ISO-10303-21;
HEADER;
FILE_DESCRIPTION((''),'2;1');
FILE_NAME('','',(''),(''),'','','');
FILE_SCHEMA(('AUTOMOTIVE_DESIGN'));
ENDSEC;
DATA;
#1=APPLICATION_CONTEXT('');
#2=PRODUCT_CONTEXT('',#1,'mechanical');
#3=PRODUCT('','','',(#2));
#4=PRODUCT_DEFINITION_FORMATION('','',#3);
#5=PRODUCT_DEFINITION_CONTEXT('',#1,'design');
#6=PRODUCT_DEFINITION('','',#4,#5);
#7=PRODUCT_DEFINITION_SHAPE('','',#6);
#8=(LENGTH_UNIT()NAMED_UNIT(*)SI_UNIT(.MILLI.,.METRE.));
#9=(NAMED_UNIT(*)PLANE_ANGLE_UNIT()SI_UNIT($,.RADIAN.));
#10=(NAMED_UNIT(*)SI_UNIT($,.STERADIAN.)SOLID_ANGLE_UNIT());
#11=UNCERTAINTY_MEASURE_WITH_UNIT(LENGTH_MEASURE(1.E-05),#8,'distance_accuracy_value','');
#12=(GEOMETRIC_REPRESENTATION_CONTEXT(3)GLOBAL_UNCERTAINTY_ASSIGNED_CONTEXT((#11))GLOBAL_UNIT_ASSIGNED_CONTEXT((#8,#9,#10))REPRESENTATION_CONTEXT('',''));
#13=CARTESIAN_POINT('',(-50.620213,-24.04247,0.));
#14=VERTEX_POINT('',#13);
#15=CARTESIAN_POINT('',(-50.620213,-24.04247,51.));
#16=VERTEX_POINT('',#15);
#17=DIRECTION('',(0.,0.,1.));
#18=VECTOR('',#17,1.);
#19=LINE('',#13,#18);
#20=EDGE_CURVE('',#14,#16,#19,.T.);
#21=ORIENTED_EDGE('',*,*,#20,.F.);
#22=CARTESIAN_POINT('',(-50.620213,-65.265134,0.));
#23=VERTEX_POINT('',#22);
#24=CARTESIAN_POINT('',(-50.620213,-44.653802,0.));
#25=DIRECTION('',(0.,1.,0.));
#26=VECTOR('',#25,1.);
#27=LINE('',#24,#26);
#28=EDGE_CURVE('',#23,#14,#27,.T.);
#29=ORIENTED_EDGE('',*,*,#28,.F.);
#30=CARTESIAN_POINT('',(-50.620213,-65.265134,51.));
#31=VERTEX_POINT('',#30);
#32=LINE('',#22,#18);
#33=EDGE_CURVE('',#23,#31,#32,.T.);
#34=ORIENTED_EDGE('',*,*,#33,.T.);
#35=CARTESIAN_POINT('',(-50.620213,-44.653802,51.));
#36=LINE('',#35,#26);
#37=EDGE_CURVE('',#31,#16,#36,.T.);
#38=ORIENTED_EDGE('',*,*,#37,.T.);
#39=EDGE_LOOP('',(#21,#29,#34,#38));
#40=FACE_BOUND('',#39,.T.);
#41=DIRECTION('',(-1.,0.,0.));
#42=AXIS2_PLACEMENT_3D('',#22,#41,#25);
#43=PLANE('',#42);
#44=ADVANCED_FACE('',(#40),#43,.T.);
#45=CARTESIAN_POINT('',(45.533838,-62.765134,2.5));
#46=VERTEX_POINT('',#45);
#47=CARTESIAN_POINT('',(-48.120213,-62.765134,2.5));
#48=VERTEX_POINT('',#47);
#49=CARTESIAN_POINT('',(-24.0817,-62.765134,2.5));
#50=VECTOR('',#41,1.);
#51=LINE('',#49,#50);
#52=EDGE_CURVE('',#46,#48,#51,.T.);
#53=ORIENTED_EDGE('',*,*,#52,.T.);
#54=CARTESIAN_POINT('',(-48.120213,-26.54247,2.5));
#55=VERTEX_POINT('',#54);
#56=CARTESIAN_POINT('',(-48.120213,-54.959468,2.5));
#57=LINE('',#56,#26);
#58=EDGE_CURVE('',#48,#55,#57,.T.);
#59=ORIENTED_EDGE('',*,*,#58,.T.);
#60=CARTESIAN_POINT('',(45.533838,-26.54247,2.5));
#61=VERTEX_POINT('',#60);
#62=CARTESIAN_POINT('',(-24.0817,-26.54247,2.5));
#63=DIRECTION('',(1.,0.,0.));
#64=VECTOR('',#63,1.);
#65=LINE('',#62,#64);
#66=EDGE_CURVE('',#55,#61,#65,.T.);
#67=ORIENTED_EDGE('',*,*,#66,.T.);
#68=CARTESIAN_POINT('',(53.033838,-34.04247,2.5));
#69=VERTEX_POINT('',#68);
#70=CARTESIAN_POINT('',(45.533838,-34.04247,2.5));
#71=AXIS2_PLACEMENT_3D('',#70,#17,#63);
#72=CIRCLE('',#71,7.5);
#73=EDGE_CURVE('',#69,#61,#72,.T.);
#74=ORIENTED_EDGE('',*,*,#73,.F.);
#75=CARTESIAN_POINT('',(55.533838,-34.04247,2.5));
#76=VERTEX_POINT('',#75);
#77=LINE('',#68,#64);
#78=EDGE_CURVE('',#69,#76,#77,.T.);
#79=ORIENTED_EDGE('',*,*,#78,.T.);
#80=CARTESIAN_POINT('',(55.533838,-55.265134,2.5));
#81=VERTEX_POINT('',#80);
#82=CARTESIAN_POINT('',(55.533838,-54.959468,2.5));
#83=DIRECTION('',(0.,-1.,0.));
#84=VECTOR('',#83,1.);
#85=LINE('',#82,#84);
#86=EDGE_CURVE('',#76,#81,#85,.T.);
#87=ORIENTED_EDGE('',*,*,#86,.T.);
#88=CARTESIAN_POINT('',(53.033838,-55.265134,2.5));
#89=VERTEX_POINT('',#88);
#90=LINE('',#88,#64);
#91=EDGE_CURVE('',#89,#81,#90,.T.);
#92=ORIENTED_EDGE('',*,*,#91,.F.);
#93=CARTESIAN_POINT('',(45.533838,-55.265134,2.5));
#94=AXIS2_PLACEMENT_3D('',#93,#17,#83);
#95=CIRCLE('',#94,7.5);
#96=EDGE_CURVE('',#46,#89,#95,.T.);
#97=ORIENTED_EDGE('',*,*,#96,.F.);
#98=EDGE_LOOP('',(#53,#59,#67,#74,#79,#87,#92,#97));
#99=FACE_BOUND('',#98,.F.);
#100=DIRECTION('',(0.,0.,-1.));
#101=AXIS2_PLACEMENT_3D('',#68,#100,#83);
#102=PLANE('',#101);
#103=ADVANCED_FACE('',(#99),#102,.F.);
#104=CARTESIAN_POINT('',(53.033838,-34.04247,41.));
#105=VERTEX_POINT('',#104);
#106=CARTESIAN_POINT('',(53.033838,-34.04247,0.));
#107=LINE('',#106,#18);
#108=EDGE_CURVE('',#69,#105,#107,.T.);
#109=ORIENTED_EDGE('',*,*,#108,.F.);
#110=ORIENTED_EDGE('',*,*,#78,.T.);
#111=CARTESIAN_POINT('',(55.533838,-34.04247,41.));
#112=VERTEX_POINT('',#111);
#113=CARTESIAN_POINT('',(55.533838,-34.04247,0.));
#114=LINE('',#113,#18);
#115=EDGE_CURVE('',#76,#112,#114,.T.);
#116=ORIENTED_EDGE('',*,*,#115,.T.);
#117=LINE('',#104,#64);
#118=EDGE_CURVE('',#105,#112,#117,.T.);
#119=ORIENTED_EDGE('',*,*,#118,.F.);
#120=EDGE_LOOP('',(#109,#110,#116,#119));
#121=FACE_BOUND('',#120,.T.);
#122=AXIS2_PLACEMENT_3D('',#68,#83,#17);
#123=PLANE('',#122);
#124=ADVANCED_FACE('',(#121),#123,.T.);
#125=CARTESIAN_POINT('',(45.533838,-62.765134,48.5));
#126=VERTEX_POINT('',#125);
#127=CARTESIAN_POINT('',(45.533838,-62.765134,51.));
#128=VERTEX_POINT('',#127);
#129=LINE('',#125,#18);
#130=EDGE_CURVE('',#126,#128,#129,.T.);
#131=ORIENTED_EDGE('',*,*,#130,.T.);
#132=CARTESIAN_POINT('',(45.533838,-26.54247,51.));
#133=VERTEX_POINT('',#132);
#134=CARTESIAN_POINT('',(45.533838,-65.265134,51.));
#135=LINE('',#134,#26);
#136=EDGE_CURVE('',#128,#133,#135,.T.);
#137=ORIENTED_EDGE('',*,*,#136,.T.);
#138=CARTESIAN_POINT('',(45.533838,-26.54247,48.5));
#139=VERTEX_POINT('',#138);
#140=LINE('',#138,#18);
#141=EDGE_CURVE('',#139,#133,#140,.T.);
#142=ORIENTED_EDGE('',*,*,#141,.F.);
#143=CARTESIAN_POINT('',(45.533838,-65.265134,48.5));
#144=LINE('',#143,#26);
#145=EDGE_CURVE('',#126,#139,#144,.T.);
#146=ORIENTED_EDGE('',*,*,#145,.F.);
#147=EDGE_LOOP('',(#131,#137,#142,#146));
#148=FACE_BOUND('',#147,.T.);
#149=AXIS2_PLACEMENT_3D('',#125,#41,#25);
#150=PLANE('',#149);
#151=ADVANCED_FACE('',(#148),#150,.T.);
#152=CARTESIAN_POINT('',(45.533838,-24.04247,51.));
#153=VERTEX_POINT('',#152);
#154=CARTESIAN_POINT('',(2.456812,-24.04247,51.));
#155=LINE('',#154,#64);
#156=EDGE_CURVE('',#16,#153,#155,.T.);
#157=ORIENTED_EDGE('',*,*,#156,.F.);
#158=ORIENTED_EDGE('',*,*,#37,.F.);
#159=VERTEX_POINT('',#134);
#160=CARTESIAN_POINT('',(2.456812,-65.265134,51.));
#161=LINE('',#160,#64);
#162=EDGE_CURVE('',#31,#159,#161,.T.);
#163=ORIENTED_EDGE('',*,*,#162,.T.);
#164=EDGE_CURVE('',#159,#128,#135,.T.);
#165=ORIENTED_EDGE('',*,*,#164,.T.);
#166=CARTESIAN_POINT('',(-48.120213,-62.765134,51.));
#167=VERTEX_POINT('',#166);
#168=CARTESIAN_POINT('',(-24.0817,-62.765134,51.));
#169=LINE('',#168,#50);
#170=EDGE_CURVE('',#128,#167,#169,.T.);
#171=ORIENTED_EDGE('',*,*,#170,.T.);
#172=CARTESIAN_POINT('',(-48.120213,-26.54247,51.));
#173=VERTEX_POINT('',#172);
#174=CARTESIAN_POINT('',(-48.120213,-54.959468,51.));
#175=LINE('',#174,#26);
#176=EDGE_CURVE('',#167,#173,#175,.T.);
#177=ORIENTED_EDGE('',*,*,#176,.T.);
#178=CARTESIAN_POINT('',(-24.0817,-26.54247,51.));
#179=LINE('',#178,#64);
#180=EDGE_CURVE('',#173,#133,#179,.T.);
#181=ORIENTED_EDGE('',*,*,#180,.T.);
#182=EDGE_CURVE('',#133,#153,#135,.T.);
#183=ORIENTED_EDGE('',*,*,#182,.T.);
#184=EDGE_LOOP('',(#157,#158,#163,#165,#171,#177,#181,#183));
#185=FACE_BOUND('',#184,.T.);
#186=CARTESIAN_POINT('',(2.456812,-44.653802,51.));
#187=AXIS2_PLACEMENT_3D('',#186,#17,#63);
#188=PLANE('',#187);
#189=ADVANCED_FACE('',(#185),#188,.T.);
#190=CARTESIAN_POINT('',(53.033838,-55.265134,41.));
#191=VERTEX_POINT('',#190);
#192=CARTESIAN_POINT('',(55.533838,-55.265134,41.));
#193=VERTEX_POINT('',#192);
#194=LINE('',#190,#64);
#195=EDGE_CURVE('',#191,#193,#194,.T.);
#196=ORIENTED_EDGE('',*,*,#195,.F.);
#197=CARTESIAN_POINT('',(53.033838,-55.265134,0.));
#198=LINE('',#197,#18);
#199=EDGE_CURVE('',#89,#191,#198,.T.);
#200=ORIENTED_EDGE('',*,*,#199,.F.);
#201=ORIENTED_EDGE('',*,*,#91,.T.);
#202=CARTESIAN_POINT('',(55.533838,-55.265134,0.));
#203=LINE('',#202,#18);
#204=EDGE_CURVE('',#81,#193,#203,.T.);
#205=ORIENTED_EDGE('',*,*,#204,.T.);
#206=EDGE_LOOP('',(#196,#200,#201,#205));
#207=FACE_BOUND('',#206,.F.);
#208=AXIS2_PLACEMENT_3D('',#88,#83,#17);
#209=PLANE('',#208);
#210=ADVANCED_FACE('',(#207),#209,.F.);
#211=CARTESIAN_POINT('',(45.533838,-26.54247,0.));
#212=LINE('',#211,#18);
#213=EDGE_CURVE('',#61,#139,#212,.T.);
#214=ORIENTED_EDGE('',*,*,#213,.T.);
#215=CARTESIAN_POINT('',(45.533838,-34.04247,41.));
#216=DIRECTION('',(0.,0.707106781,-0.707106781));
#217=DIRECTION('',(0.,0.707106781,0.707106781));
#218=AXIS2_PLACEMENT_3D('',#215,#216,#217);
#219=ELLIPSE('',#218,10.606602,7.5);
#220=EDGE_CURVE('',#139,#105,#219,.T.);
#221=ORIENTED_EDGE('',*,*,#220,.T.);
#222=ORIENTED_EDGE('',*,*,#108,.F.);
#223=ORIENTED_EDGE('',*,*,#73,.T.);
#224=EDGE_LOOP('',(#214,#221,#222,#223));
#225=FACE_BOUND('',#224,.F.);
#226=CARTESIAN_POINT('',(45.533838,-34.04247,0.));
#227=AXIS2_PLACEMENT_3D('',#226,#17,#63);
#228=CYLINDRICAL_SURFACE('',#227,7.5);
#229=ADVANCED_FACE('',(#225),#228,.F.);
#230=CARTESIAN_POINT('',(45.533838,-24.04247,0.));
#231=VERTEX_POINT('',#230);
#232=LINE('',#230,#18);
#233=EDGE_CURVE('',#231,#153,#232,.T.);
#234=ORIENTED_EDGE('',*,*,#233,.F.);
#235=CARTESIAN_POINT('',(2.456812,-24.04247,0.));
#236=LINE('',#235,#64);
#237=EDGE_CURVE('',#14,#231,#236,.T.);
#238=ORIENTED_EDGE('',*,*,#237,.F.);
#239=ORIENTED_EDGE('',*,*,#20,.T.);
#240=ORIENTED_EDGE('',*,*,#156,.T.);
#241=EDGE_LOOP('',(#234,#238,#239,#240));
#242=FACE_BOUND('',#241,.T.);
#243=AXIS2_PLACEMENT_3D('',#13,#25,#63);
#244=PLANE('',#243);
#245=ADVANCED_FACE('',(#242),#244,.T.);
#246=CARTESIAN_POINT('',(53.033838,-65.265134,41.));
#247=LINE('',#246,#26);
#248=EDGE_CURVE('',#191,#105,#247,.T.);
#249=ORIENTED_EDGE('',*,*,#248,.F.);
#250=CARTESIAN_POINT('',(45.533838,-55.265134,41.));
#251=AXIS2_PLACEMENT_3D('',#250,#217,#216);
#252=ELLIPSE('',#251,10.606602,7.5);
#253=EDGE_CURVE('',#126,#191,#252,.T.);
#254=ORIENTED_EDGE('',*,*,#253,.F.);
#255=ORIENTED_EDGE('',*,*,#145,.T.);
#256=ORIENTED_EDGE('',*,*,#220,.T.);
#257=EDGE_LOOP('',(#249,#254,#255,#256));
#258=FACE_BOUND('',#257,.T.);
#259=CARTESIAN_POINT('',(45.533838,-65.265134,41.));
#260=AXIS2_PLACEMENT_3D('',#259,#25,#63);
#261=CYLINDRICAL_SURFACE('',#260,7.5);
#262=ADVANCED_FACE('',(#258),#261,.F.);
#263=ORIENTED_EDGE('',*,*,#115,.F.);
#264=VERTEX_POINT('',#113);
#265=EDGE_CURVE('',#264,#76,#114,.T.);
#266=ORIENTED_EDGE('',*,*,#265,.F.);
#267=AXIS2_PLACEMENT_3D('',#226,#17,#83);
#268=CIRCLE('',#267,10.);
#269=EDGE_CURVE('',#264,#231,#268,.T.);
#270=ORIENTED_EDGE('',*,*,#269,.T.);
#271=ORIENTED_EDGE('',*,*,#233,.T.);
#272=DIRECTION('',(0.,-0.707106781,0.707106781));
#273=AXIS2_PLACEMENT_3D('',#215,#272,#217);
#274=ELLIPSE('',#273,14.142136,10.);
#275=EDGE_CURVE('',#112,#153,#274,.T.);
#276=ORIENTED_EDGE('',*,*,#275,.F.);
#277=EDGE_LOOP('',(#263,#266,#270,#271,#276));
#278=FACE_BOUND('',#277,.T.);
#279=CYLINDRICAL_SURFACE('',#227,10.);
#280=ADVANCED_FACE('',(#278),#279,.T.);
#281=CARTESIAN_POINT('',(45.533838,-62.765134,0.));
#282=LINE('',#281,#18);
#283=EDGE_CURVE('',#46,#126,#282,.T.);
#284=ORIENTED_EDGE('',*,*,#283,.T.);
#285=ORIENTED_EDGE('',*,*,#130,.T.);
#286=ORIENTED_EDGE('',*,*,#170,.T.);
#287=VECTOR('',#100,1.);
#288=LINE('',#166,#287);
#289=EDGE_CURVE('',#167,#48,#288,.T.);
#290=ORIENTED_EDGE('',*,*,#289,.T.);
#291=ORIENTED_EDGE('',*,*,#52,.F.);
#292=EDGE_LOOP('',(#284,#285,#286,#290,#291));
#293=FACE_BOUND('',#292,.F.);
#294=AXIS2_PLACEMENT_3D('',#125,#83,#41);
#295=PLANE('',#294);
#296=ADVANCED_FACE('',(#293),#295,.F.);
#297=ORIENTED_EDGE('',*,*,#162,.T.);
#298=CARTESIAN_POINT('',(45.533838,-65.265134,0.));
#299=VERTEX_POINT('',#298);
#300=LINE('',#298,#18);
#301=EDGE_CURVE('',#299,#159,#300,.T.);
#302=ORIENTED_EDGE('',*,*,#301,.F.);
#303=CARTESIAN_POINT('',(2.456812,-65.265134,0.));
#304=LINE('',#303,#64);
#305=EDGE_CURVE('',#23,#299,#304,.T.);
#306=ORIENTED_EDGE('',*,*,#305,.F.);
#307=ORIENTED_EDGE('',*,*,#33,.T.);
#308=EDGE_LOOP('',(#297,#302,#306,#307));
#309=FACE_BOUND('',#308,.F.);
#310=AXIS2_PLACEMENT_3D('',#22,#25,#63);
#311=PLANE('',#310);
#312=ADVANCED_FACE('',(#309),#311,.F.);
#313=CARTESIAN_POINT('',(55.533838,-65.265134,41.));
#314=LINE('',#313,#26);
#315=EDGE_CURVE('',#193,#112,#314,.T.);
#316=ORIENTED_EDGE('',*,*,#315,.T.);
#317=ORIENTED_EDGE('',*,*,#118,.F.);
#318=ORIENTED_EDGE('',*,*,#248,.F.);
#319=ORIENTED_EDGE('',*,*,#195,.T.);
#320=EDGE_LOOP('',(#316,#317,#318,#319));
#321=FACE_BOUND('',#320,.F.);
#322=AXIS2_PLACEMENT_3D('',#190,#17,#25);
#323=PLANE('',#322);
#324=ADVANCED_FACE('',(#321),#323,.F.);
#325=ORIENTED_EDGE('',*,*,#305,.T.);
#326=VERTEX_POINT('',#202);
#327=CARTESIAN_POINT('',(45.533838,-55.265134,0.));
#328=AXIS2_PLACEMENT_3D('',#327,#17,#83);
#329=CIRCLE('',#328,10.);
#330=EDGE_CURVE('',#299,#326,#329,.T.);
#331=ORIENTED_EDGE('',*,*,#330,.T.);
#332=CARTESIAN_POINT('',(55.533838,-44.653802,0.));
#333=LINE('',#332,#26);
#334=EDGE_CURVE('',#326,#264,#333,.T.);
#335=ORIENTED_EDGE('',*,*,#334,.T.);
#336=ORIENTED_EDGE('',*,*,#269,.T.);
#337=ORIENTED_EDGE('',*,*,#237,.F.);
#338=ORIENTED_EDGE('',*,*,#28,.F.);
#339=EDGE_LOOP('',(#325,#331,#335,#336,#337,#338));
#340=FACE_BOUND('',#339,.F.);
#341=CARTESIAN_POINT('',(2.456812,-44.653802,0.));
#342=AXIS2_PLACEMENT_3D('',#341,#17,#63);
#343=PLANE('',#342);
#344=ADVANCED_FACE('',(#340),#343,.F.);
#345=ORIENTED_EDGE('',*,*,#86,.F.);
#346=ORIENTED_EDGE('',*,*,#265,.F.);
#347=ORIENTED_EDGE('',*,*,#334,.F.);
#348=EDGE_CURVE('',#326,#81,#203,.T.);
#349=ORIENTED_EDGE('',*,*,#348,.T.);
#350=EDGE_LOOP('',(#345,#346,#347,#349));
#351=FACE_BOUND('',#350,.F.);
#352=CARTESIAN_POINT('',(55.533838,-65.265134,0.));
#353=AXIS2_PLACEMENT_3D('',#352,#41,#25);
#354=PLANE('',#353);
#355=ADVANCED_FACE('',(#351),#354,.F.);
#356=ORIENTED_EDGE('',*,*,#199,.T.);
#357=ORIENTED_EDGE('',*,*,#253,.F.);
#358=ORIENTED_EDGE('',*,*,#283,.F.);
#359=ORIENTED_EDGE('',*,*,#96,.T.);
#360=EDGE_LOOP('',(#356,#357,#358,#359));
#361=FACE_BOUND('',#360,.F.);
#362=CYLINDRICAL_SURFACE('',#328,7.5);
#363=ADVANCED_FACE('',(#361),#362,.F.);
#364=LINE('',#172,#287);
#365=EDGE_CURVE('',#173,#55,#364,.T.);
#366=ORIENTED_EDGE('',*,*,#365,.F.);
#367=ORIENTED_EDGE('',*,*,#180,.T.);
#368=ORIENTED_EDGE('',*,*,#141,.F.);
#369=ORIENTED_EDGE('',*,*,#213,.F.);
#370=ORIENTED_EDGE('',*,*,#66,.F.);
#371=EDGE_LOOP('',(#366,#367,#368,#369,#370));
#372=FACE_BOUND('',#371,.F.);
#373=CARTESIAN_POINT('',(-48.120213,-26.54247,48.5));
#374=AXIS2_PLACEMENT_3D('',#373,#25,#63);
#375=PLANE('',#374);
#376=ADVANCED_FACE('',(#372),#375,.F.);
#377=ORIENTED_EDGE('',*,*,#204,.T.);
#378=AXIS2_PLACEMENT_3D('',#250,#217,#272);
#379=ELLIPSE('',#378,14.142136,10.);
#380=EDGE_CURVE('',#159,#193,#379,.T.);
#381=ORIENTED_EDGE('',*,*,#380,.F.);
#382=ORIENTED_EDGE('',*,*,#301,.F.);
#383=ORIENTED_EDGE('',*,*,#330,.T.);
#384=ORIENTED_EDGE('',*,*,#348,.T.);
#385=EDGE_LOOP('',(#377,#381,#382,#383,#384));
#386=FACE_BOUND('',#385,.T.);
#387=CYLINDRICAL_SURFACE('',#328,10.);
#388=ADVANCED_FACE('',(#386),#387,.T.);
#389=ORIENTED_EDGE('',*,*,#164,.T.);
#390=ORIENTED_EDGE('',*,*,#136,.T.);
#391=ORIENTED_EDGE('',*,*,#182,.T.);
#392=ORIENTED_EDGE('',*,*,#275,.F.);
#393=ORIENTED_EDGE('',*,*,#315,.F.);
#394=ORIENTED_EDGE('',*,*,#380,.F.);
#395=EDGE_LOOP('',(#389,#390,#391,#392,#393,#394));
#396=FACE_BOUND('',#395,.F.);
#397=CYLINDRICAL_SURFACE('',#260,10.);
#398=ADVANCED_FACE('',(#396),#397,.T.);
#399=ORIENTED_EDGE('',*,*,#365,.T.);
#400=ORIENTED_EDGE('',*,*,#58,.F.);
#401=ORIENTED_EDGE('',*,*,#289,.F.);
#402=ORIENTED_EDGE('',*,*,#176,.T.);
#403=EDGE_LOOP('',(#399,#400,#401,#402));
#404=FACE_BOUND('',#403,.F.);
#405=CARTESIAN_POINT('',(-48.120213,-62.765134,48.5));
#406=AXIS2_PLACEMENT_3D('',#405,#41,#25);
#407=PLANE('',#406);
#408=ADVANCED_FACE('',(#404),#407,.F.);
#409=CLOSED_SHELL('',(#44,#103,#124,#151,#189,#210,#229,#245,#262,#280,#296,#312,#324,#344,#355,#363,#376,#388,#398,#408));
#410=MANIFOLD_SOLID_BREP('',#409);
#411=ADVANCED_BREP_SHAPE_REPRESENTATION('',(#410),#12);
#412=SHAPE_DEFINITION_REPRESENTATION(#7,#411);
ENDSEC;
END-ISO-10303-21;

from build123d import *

# Parameters (mm, degrees)
F0_W     = 106.154050678
F0_H     = 41.2226635963
F1_DEPTH = 51
F2_R     = 10
F3_T     = -2.5


# Not quite as in the source:
# - a shell that OpenCascade refuses in one call is made with other operations: the cavity is built on its own and cut out


with BuildPart() as f1:
    # F0 (on Top) → F1 (new body)
    with BuildSketch(Plane.XY):
        with Locations((2.456812188, -44.6538021788)):
            Rectangle(F0_W, F0_H)
    extrude(amount=F1_DEPTH)

    # F2
    f2_edges = [f1.edges().sort_by_distance(p)[0] for p in [
        (55.533838, -65.265134, 25.5),
        (55.533838, -24.04247, 25.5),
        (55.533838, -44.653802, 51),
    ]]
    fillet(f2_edges, radius=F2_R)

    # F3: a shell. OpenCascade refuses it in one call, so the cavity is built on its own and cut out:
    # the body offset inwards by the wall thickness, plus a prism from it out through each open face.
    f3_core = offset(f1.part, amount=F3_T, mode=Mode.PRIVATE)
    f3_exits = [f3_core.faces().sort_by_distance(p)[0] for p in [
        (-1.293188, -44.653802, 48.5),
        (53.033838, -44.653802, 21.75),
    ]]
    add(f3_core, mode=Mode.SUBTRACT)
    extrude(f3_exits, amount=-F3_T, mode=Mode.SUBTRACT)


solid = f1.part
